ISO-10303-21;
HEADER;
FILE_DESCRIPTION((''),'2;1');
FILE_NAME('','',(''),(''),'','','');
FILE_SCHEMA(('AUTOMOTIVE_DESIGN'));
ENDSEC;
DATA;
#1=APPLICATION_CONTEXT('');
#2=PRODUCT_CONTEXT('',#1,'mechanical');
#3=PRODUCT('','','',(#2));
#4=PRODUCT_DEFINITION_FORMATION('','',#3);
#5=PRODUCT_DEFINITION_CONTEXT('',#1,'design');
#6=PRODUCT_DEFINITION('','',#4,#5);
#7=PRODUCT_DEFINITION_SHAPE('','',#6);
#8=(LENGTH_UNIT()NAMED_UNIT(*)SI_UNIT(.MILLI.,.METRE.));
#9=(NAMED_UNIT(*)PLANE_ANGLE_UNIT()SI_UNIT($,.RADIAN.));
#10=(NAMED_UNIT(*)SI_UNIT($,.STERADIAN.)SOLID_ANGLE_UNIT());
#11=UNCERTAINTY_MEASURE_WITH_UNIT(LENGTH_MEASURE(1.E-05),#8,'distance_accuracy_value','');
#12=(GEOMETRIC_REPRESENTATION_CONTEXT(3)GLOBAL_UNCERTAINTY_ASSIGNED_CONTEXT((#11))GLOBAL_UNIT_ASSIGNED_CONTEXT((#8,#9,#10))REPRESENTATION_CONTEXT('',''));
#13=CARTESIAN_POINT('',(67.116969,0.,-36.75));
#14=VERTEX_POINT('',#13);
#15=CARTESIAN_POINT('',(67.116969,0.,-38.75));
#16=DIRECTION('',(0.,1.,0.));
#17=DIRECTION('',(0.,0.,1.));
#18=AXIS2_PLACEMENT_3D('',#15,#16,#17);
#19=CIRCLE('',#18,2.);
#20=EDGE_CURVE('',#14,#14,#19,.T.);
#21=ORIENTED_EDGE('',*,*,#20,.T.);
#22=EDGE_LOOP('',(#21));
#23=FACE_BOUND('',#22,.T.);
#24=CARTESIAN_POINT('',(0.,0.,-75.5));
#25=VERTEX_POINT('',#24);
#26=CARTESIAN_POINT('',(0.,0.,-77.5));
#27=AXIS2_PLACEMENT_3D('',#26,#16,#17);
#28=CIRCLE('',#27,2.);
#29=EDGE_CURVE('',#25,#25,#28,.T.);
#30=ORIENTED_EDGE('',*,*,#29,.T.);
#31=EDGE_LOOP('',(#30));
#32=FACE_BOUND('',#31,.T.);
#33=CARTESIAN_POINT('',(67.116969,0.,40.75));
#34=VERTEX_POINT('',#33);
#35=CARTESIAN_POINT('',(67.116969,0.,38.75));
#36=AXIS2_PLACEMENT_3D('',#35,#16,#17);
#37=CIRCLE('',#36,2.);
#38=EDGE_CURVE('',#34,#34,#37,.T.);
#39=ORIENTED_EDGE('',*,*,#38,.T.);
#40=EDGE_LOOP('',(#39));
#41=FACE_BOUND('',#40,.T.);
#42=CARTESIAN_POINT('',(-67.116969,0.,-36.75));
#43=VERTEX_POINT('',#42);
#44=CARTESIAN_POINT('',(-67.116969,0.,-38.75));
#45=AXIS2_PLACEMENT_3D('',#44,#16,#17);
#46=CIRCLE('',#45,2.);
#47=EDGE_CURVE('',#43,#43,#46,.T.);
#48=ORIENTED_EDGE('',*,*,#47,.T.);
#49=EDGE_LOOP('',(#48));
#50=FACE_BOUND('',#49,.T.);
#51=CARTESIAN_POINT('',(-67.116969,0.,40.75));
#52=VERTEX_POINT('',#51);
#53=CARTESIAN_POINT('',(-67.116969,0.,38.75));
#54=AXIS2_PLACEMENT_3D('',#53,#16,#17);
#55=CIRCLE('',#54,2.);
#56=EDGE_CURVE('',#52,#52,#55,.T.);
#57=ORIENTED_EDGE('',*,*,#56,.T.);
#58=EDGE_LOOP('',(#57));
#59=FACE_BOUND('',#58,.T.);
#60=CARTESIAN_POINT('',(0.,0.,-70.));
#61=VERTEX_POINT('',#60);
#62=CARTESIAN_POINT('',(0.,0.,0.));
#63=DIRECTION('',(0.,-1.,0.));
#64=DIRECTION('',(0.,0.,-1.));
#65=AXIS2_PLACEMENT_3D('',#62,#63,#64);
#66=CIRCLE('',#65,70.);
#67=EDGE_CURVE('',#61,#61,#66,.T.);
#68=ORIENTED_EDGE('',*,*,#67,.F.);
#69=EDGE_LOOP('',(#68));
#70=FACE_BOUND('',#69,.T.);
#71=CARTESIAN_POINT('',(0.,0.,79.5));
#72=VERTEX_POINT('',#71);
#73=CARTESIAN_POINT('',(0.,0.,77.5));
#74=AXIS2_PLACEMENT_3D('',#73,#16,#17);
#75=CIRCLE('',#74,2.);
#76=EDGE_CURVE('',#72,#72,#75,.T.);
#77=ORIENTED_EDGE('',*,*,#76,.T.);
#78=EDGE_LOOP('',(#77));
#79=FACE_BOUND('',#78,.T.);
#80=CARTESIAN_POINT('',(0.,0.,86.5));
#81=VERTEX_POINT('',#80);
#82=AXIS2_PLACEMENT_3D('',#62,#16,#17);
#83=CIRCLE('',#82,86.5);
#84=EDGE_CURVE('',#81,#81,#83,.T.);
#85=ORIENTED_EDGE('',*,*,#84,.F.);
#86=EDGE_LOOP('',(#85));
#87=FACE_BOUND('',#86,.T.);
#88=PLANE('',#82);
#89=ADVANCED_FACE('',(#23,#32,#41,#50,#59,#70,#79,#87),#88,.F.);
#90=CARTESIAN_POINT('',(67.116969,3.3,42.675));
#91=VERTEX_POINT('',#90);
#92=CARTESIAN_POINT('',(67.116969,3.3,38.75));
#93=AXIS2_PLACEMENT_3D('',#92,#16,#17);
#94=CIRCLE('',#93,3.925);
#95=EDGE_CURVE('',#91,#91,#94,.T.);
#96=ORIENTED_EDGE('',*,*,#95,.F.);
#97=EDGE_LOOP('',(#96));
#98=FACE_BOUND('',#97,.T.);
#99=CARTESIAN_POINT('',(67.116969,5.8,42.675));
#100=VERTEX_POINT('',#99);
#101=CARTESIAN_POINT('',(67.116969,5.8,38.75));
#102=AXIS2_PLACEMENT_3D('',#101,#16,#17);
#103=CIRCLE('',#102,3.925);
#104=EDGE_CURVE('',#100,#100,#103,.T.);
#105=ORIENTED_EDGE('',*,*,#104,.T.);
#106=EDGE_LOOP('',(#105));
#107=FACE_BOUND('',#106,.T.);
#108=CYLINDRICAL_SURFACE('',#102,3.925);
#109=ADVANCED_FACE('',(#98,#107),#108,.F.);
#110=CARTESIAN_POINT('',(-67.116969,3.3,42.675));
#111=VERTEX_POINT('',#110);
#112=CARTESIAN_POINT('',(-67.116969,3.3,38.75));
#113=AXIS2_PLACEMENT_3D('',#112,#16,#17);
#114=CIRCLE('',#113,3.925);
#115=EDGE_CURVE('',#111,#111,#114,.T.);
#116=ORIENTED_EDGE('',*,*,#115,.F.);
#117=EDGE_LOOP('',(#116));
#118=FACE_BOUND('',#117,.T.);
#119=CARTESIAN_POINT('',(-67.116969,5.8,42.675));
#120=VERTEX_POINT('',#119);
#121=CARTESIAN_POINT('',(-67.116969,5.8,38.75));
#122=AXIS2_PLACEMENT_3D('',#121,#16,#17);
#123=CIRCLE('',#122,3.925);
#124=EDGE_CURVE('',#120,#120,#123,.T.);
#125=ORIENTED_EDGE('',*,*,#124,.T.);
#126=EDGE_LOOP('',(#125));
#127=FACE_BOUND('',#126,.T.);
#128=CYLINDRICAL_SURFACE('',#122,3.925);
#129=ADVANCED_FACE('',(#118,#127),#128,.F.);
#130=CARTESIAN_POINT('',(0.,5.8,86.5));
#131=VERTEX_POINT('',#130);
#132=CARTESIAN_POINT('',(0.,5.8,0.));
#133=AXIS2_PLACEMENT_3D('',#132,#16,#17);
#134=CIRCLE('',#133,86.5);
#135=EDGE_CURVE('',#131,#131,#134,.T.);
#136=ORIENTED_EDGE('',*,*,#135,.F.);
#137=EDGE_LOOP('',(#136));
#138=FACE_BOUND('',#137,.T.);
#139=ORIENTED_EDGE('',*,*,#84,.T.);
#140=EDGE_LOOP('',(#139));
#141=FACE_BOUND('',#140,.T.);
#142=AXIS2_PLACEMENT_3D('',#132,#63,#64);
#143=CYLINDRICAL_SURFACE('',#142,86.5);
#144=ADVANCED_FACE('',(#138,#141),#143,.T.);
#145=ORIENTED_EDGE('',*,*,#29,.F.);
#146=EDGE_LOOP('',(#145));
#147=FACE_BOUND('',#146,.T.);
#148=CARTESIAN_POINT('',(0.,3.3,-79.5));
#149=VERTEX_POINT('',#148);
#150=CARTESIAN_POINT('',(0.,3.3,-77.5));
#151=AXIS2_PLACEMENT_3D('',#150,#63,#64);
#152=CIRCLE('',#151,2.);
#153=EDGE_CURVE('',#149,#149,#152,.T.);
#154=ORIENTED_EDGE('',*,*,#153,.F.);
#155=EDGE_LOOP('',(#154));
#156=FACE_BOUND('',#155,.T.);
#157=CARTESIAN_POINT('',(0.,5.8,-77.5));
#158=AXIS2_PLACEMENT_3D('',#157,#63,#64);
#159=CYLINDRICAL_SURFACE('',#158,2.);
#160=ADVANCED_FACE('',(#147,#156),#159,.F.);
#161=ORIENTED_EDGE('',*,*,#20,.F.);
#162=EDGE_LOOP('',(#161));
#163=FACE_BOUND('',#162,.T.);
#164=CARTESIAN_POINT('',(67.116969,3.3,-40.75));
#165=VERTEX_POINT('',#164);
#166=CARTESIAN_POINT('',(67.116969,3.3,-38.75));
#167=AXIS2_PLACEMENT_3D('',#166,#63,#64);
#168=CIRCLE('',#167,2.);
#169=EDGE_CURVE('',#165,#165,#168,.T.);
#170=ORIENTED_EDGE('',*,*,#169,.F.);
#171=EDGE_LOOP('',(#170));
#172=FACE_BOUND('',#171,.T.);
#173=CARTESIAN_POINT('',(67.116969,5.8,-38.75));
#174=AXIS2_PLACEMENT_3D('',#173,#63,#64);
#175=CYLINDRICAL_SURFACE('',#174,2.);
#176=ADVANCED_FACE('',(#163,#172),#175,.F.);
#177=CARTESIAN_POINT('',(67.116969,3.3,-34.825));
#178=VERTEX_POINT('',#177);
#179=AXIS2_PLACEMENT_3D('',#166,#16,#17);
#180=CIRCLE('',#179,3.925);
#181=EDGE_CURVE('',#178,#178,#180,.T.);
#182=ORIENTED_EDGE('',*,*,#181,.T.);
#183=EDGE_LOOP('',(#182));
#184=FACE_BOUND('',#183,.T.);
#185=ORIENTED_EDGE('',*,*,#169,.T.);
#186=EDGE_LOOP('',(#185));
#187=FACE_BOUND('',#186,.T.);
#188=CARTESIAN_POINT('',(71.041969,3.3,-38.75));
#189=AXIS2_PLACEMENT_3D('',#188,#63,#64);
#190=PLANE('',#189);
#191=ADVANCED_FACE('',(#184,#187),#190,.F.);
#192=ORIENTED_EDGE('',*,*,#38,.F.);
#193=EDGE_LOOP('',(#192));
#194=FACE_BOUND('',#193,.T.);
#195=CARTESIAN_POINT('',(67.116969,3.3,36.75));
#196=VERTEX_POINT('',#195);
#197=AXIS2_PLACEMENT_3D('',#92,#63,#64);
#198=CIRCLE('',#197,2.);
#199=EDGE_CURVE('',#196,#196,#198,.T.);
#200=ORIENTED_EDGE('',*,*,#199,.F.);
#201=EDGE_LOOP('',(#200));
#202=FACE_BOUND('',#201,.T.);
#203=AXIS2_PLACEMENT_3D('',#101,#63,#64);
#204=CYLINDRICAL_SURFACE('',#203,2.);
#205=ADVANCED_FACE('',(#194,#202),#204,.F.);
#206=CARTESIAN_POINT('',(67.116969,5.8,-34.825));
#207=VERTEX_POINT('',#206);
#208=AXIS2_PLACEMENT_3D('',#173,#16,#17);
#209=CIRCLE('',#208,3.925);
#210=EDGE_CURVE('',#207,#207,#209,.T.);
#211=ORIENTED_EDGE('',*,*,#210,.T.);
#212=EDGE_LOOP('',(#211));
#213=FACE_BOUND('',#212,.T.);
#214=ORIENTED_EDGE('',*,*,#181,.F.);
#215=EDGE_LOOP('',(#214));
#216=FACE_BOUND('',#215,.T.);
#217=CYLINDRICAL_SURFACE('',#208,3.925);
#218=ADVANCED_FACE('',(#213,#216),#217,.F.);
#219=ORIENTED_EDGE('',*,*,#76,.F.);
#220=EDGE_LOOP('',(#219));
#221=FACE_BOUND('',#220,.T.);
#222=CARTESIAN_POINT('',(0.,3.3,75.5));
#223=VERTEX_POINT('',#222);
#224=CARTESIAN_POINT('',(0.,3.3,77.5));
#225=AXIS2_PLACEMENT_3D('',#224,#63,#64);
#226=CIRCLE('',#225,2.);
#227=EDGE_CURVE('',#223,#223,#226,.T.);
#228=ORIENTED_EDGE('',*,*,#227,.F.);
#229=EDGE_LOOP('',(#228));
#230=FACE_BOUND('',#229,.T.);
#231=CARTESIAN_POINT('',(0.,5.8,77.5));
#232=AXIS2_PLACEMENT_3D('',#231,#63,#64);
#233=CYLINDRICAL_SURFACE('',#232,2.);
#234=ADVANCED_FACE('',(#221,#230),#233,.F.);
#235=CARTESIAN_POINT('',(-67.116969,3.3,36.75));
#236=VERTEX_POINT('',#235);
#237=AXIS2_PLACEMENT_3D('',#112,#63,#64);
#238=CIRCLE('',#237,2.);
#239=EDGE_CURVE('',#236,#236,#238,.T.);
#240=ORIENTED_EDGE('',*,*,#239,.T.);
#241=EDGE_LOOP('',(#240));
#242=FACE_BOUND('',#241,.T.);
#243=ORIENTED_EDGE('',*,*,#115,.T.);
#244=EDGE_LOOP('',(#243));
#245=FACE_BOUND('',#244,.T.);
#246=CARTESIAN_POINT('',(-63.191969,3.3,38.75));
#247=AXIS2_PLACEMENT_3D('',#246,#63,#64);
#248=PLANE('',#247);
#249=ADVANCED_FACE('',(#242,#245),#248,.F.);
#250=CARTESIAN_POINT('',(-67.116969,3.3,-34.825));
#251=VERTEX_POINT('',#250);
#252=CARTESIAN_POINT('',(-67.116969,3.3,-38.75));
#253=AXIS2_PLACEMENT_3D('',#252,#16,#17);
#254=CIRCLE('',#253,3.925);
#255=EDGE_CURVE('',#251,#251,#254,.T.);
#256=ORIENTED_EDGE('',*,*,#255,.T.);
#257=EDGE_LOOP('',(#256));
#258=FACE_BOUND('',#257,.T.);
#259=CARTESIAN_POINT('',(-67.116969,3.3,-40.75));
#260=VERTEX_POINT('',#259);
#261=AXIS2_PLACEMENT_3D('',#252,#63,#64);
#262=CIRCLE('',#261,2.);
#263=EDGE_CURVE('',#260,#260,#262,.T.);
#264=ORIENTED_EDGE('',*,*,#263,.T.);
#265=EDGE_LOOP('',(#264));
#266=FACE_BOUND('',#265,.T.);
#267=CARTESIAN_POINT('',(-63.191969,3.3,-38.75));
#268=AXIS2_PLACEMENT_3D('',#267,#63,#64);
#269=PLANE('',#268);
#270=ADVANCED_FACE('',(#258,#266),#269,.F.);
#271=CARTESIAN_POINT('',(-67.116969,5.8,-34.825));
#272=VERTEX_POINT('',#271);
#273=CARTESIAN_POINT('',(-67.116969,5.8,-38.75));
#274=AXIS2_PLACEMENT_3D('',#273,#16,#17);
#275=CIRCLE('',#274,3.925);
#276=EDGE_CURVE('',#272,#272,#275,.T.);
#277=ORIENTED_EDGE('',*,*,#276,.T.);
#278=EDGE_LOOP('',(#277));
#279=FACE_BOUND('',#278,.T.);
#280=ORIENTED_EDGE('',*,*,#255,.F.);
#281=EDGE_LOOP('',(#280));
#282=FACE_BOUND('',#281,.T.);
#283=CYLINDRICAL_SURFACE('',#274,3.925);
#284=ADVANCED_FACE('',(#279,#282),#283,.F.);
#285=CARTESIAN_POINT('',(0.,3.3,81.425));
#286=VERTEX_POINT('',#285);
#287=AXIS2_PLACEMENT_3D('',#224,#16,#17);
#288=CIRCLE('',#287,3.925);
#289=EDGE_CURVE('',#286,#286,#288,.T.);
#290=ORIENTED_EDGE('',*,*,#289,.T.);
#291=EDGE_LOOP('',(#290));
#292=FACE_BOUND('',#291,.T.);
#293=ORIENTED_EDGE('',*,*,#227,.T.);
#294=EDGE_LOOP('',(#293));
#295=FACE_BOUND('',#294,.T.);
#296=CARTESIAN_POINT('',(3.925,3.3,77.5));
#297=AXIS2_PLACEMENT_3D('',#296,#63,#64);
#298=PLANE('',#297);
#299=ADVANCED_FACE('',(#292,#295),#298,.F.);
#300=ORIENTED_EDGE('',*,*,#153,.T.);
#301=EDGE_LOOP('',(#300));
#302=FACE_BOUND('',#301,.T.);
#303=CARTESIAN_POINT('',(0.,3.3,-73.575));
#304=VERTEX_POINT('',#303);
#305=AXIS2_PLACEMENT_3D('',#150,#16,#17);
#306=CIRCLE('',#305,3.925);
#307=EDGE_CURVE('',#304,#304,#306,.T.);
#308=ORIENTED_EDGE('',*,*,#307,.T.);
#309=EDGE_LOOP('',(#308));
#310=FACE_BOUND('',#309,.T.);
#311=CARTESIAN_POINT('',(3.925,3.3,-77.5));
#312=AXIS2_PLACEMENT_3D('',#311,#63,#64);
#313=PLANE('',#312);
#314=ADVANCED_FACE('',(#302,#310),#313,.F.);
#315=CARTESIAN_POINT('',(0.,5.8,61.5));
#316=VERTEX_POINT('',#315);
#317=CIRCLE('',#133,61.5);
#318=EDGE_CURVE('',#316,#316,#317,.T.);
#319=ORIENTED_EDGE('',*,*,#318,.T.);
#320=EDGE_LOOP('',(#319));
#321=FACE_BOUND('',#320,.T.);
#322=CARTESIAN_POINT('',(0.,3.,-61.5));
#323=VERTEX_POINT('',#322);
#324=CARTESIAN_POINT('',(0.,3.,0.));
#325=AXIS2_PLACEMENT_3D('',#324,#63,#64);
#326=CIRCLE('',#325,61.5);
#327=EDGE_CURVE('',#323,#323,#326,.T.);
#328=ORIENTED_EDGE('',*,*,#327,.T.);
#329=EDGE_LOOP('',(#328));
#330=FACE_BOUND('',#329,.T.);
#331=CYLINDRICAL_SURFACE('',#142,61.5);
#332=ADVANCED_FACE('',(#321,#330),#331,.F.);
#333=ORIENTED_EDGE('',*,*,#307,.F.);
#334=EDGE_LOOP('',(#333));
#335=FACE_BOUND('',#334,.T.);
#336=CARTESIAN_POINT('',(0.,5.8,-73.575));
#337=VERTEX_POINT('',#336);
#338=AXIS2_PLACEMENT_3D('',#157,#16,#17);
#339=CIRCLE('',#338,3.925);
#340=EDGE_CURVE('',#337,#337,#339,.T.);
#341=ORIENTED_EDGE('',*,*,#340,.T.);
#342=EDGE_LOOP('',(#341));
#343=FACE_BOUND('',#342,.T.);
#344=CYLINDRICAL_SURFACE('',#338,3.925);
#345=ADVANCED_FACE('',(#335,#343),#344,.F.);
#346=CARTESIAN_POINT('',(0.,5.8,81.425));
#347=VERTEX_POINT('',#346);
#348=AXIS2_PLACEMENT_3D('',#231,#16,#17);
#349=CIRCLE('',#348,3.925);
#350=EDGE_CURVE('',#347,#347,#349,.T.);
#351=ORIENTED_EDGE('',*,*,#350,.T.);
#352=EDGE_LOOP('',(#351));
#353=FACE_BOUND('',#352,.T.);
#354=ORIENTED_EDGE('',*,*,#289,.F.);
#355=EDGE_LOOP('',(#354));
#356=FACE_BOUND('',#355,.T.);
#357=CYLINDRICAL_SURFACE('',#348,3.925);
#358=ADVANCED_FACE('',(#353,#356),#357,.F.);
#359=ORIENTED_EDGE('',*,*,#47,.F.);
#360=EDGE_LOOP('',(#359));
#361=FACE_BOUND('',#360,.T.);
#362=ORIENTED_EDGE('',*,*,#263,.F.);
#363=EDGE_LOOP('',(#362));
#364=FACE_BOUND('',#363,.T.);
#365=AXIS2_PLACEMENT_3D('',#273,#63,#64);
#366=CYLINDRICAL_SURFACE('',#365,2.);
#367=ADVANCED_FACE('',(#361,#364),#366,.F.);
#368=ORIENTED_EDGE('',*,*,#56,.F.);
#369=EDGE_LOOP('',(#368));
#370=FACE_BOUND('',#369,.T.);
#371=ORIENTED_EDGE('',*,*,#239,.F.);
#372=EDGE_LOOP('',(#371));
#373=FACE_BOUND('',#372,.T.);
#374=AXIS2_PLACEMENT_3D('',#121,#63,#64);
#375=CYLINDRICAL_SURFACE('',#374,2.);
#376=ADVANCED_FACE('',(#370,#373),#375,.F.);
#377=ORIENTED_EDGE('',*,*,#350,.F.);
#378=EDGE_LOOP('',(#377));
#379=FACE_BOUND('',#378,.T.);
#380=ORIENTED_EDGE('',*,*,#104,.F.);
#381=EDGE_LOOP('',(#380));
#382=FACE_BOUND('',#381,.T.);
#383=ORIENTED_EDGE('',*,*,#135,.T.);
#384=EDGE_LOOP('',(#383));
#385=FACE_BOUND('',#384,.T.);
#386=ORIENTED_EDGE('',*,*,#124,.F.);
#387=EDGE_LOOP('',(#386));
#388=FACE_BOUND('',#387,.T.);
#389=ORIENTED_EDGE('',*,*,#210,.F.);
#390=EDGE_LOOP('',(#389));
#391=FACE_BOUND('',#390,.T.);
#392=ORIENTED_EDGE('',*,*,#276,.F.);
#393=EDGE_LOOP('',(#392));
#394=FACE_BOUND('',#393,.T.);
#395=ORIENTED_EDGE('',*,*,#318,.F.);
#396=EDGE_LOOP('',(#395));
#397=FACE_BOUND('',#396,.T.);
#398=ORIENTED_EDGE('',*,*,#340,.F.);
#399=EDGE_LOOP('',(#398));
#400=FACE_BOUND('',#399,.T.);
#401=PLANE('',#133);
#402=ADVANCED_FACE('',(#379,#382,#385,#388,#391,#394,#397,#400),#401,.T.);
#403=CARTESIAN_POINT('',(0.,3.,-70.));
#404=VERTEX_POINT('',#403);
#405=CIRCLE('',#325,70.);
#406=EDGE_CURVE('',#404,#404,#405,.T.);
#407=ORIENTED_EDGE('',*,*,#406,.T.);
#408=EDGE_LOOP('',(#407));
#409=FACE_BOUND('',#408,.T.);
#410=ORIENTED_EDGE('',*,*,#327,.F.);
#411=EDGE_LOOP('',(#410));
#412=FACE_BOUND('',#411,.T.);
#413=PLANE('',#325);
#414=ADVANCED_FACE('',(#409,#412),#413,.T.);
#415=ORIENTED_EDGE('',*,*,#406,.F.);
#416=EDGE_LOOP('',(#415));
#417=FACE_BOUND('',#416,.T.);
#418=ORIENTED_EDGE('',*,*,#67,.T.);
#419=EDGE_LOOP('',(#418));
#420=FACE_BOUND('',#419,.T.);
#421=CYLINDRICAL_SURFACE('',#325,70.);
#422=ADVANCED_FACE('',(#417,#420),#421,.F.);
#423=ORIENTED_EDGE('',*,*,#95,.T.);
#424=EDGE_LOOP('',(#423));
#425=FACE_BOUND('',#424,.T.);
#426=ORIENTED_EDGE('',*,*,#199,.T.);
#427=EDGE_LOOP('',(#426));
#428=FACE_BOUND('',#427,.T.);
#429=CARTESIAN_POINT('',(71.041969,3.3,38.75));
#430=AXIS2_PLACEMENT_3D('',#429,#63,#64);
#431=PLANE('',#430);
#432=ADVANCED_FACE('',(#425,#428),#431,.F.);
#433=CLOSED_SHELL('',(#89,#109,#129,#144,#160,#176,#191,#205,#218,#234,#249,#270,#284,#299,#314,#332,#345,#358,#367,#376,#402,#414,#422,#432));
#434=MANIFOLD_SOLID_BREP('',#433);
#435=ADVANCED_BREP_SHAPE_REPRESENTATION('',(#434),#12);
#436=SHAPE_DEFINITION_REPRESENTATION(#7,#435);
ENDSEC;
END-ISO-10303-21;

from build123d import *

# Parameters (mm, degrees)
SKETCH2_R                 = 86.5
SKETCH2_R_2               = 61.5
SKETCH2_R_3               = 2
BOSS_EXTRUDE1_DEPTH       = 5.8
SKETCH3_R                 = 70
SKETCH3_R_2               = 61.5
CUT_EXTRUDE1_DEPTH        = 3
ADVANCEDHOLE1_START       = 3.3
ADVANCEDHOLE1_OUTLINE_R   = 3.925
ADVANCEDHOLE1_OUTLINE_R_2 = 2
ADVANCEDHOLE1_DEPTH       = 2.5
CIRPATTERN1_COUNT         = 6


# Read off the part's stored shape, not the designer's step: AdvancedHole1
with BuildPart() as part:
    # Sketch2 → Boss-Extrude1 (new body)
    with BuildSketch(Plane(origin=(0, 0, 0), x_dir=(1, 0, 0), z_dir=(0, 1, 0))):
        with Locations(Location((0, 0, 0), (0, 0, 270))):
            Circle(SKETCH2_R)
        with Locations(Location((0, 0, 0), (0, 0, 270))):
            Circle(SKETCH2_R_2, mode=Mode.SUBTRACT)
        with Locations(Location((0, 77.5, 0), (0, 0, 270))):
            Circle(SKETCH2_R_3, mode=Mode.SUBTRACT)
        with Locations(Location((67.116968793, 38.75, 0), (0, 0, 270))):
            Circle(SKETCH2_R_3, mode=Mode.SUBTRACT)
        with Locations(Location((67.116968793, -38.75, 0), (0, 0, 270))):
            Circle(SKETCH2_R_3, mode=Mode.SUBTRACT)
        with Locations(Location((0, -77.5, 0), (0, 0, 270))):
            Circle(SKETCH2_R_3, mode=Mode.SUBTRACT)
        with Locations(Location((-67.116968793, -38.75, 0), (0, 0, 270))):
            Circle(SKETCH2_R_3, mode=Mode.SUBTRACT)
        with Locations(Location((-67.116968793, 38.75, 0), (0, 0, 270))):
            Circle(SKETCH2_R_3, mode=Mode.SUBTRACT)
    extrude(amount=BOSS_EXTRUDE1_DEPTH)

    # Sketch3 → Cut-Extrude1 (cut)
    with BuildSketch(Plane.XZ):
        with Locations(Location((0, 0, 0), (0, 0, 270))):
            Circle(SKETCH3_R)
        with Locations(Location((0, 0, 0), (0, 0, 270))):
            Circle(SKETCH3_R_2, mode=Mode.SUBTRACT)
    extrude(amount=-CUT_EXTRUDE1_DEPTH, mode=Mode.SUBTRACT)

    # AdvancedHole1 outline → AdvancedHole1 (cut)
    with BuildSketch(Plane(origin=(0, 0, 0), x_dir=(1, 0, 0), z_dir=(0, 1, 0)).offset(ADVANCEDHOLE1_START)):
        with Locations((-67.116968793, -38.75)):
            Circle(ADVANCEDHOLE1_OUTLINE_R)
        with Locations((-67.116968793, -38.75)):
            Circle(ADVANCEDHOLE1_OUTLINE_R_2, mode=Mode.SUBTRACT)
    advancedhole1 = extrude(amount=ADVANCEDHOLE1_DEPTH, mode=Mode.SUBTRACT)

    # CirPattern1: AdvancedHole1 ×6 about axis
    cirpattern1_axis = Axis((0, 0, 0), (0, 1, 0))
    for i in range(1, CIRPATTERN1_COUNT):
        add(advancedhole1.rotate(cirpattern1_axis, i * 360 / CIRPATTERN1_COUNT), mode=Mode.SUBTRACT)


solid = part.part
